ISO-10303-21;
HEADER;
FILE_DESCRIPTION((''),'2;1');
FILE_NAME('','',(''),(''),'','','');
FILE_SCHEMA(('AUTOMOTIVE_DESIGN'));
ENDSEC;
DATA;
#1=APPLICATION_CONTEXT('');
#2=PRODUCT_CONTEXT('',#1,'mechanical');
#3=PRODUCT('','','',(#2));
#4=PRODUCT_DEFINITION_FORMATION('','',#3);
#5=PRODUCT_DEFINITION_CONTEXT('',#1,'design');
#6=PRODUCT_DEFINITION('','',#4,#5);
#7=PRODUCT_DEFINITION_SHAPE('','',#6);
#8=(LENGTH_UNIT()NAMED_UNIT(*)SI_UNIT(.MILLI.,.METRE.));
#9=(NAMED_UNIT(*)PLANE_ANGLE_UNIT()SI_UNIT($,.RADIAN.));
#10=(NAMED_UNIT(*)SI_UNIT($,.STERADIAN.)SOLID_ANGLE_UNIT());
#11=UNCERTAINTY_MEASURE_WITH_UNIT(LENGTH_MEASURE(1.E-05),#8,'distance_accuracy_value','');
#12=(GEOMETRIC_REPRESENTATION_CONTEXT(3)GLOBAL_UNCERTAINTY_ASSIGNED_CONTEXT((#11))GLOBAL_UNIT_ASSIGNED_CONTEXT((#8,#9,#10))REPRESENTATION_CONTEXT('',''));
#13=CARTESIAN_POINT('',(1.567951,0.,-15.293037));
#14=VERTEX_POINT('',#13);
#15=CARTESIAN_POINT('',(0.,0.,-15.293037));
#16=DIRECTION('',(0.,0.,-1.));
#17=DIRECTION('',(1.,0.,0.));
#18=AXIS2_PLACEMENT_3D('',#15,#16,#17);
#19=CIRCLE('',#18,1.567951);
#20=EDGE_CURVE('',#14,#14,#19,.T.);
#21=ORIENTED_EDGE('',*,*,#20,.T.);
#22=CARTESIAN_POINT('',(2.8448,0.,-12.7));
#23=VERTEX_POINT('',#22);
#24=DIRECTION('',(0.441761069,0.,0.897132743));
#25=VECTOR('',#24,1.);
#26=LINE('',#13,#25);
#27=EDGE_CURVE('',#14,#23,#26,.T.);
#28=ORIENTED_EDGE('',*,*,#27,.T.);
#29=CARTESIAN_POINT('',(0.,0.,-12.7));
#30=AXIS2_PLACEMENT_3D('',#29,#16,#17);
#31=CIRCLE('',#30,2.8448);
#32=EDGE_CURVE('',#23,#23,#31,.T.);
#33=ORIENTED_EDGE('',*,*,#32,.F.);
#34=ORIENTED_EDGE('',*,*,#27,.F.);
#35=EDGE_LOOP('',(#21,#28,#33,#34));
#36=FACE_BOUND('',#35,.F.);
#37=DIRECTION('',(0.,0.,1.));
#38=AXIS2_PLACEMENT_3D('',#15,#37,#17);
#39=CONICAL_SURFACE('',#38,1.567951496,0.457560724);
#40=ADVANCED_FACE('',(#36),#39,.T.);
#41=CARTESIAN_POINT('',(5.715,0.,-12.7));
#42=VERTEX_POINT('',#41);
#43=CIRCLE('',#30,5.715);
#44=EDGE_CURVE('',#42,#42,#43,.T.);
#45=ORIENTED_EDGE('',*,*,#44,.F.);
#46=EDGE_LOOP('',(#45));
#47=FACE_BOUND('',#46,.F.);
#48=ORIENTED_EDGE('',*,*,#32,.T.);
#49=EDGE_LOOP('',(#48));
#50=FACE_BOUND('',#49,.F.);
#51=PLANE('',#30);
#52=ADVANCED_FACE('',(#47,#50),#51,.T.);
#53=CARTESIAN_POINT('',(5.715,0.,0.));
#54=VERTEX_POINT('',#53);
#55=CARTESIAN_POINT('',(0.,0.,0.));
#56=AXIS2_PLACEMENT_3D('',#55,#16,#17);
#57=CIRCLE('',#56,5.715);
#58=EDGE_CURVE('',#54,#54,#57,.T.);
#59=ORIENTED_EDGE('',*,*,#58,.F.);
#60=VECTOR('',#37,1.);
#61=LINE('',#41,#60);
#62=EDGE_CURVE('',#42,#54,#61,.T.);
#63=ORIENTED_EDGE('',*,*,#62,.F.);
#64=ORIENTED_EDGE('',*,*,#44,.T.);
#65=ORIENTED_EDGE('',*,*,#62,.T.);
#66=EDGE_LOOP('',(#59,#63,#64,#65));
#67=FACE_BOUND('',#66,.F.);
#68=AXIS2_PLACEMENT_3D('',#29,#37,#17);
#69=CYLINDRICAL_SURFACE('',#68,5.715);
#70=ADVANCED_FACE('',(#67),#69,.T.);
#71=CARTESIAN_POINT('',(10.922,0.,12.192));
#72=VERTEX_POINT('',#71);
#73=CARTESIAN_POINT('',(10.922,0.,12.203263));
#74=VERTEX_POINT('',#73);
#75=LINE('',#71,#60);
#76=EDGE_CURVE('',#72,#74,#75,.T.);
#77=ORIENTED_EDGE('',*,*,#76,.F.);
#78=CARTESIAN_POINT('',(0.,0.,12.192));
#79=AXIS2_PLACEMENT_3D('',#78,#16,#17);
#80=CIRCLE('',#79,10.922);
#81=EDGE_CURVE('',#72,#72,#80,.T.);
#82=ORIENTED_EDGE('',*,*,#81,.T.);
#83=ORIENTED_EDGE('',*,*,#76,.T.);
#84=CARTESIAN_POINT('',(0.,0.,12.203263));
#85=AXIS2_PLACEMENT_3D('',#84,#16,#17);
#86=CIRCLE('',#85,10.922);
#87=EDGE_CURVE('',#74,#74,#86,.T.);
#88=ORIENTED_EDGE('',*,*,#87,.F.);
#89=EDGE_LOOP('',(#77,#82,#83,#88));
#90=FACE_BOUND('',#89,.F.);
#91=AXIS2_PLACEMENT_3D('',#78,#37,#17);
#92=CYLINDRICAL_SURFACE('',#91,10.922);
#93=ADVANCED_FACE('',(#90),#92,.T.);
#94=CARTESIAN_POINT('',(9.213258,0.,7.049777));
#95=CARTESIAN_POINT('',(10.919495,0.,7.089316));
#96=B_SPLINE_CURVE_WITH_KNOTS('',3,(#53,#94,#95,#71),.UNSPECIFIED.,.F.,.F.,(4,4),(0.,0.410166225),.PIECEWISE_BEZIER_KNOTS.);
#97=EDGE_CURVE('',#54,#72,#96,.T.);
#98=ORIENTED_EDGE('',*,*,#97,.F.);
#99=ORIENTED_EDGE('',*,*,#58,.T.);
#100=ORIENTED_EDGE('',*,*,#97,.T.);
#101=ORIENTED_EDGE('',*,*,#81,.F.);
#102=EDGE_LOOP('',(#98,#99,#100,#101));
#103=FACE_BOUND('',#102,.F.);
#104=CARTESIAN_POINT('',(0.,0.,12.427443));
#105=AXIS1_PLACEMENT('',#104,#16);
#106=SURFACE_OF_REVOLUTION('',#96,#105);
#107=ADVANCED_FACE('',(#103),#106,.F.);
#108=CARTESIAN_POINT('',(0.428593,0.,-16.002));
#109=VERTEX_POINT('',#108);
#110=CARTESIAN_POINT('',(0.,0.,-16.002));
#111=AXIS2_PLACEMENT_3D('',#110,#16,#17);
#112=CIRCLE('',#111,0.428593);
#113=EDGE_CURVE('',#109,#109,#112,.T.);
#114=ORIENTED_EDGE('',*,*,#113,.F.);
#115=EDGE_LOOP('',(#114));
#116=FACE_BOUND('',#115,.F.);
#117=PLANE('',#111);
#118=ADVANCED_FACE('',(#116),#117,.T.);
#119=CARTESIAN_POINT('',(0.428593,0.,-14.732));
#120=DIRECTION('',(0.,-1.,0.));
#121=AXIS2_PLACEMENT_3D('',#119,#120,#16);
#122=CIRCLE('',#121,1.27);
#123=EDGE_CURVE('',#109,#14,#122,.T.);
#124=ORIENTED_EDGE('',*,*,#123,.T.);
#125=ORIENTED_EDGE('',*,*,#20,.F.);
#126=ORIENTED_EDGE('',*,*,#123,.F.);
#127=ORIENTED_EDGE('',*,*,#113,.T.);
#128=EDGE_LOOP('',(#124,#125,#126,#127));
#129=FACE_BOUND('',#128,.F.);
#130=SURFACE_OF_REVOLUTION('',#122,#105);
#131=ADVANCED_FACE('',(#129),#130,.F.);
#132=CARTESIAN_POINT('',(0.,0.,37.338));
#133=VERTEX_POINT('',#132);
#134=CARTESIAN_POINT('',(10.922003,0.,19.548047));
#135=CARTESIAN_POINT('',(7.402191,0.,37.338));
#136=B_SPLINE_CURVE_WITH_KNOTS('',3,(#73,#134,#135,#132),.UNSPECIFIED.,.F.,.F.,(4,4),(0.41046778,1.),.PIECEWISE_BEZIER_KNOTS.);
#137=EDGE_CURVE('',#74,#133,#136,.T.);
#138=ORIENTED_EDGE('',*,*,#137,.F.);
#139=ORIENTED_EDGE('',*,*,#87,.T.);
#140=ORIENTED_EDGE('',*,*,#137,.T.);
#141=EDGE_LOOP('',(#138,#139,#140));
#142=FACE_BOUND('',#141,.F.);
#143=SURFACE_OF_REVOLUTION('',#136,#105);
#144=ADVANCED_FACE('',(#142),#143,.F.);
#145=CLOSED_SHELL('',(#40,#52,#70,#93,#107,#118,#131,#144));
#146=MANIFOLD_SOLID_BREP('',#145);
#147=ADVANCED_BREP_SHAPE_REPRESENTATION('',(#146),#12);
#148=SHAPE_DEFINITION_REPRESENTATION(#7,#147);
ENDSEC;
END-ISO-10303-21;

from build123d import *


# Not quite as in the source:
# - ends of sketch curves that miss each other by under 0.0002 mm in the source are joined


with BuildPart() as f2:
    # F0 (on Front) → F2 (revolve)
    with BuildSketch(Plane.XZ):
        with BuildLine():
            Line((1.5679514959, -15.2930365572), (2.8448, -12.7))
            Line((2.8448, -12.7), (5.715, -12.7))
            Line((5.715, -12.7), (5.715, 0))
            Line((5.715, 0), (0, 0))
            Line((0, 0), (0, -16.002))
            Line((0, -16.002), (0.4285929126, -16.002))
            ThreePointArc((0.4285929126, -16.002), (1.0995562396, -15.8102894852), (1.5679514959, -15.2930365572))
        make_face()
    revolve(axis=Axis((0, 0, 12.4274427071), (0, 0, -1)))


with BuildPart() as f3_1:
    # F3: copy of F2
    add(f2.part)


with BuildPart() as f2_1:
    add(f2.part)

    # F0 (on Front) → F5 (revolve)
    with BuildSketch(Plane.XZ):
        with BuildLine():
            Line((0, 0), (5.715, 0))
            add(Edge.make_bspline(
                [(5.715, 0), (9.213257581, 7.0497766137), (10.9194947638, 7.0893163742), (10.922, 12.192)],
                knots=[0, 0, 0, 0, 0.4101662252, 0.4101662252, 0.4101662252, 0.4101662252], degree=3))
            Line((10.922, 12.192), (10.922, 12.2032626975))
            add(Edge.make_bspline(
                [(10.922, 12.2032626975), (10.9220027628, 19.5480467726), (7.4021908993, 37.338), (0, 37.338)],
                knots=[0.4104677797, 0.4104677797, 0.4104677797, 0.4104677797, 1, 1, 1, 1], degree=3))
            Line((0, 37.338), (0, 0))
        make_face()
    revolve(axis=Axis((0, 0, 12.4274427071), (0, 0, -1)))


with BuildPart() as f6_1:
    # F6: copy of F2
    add(f2_1.part)


solid = f2_1.part
